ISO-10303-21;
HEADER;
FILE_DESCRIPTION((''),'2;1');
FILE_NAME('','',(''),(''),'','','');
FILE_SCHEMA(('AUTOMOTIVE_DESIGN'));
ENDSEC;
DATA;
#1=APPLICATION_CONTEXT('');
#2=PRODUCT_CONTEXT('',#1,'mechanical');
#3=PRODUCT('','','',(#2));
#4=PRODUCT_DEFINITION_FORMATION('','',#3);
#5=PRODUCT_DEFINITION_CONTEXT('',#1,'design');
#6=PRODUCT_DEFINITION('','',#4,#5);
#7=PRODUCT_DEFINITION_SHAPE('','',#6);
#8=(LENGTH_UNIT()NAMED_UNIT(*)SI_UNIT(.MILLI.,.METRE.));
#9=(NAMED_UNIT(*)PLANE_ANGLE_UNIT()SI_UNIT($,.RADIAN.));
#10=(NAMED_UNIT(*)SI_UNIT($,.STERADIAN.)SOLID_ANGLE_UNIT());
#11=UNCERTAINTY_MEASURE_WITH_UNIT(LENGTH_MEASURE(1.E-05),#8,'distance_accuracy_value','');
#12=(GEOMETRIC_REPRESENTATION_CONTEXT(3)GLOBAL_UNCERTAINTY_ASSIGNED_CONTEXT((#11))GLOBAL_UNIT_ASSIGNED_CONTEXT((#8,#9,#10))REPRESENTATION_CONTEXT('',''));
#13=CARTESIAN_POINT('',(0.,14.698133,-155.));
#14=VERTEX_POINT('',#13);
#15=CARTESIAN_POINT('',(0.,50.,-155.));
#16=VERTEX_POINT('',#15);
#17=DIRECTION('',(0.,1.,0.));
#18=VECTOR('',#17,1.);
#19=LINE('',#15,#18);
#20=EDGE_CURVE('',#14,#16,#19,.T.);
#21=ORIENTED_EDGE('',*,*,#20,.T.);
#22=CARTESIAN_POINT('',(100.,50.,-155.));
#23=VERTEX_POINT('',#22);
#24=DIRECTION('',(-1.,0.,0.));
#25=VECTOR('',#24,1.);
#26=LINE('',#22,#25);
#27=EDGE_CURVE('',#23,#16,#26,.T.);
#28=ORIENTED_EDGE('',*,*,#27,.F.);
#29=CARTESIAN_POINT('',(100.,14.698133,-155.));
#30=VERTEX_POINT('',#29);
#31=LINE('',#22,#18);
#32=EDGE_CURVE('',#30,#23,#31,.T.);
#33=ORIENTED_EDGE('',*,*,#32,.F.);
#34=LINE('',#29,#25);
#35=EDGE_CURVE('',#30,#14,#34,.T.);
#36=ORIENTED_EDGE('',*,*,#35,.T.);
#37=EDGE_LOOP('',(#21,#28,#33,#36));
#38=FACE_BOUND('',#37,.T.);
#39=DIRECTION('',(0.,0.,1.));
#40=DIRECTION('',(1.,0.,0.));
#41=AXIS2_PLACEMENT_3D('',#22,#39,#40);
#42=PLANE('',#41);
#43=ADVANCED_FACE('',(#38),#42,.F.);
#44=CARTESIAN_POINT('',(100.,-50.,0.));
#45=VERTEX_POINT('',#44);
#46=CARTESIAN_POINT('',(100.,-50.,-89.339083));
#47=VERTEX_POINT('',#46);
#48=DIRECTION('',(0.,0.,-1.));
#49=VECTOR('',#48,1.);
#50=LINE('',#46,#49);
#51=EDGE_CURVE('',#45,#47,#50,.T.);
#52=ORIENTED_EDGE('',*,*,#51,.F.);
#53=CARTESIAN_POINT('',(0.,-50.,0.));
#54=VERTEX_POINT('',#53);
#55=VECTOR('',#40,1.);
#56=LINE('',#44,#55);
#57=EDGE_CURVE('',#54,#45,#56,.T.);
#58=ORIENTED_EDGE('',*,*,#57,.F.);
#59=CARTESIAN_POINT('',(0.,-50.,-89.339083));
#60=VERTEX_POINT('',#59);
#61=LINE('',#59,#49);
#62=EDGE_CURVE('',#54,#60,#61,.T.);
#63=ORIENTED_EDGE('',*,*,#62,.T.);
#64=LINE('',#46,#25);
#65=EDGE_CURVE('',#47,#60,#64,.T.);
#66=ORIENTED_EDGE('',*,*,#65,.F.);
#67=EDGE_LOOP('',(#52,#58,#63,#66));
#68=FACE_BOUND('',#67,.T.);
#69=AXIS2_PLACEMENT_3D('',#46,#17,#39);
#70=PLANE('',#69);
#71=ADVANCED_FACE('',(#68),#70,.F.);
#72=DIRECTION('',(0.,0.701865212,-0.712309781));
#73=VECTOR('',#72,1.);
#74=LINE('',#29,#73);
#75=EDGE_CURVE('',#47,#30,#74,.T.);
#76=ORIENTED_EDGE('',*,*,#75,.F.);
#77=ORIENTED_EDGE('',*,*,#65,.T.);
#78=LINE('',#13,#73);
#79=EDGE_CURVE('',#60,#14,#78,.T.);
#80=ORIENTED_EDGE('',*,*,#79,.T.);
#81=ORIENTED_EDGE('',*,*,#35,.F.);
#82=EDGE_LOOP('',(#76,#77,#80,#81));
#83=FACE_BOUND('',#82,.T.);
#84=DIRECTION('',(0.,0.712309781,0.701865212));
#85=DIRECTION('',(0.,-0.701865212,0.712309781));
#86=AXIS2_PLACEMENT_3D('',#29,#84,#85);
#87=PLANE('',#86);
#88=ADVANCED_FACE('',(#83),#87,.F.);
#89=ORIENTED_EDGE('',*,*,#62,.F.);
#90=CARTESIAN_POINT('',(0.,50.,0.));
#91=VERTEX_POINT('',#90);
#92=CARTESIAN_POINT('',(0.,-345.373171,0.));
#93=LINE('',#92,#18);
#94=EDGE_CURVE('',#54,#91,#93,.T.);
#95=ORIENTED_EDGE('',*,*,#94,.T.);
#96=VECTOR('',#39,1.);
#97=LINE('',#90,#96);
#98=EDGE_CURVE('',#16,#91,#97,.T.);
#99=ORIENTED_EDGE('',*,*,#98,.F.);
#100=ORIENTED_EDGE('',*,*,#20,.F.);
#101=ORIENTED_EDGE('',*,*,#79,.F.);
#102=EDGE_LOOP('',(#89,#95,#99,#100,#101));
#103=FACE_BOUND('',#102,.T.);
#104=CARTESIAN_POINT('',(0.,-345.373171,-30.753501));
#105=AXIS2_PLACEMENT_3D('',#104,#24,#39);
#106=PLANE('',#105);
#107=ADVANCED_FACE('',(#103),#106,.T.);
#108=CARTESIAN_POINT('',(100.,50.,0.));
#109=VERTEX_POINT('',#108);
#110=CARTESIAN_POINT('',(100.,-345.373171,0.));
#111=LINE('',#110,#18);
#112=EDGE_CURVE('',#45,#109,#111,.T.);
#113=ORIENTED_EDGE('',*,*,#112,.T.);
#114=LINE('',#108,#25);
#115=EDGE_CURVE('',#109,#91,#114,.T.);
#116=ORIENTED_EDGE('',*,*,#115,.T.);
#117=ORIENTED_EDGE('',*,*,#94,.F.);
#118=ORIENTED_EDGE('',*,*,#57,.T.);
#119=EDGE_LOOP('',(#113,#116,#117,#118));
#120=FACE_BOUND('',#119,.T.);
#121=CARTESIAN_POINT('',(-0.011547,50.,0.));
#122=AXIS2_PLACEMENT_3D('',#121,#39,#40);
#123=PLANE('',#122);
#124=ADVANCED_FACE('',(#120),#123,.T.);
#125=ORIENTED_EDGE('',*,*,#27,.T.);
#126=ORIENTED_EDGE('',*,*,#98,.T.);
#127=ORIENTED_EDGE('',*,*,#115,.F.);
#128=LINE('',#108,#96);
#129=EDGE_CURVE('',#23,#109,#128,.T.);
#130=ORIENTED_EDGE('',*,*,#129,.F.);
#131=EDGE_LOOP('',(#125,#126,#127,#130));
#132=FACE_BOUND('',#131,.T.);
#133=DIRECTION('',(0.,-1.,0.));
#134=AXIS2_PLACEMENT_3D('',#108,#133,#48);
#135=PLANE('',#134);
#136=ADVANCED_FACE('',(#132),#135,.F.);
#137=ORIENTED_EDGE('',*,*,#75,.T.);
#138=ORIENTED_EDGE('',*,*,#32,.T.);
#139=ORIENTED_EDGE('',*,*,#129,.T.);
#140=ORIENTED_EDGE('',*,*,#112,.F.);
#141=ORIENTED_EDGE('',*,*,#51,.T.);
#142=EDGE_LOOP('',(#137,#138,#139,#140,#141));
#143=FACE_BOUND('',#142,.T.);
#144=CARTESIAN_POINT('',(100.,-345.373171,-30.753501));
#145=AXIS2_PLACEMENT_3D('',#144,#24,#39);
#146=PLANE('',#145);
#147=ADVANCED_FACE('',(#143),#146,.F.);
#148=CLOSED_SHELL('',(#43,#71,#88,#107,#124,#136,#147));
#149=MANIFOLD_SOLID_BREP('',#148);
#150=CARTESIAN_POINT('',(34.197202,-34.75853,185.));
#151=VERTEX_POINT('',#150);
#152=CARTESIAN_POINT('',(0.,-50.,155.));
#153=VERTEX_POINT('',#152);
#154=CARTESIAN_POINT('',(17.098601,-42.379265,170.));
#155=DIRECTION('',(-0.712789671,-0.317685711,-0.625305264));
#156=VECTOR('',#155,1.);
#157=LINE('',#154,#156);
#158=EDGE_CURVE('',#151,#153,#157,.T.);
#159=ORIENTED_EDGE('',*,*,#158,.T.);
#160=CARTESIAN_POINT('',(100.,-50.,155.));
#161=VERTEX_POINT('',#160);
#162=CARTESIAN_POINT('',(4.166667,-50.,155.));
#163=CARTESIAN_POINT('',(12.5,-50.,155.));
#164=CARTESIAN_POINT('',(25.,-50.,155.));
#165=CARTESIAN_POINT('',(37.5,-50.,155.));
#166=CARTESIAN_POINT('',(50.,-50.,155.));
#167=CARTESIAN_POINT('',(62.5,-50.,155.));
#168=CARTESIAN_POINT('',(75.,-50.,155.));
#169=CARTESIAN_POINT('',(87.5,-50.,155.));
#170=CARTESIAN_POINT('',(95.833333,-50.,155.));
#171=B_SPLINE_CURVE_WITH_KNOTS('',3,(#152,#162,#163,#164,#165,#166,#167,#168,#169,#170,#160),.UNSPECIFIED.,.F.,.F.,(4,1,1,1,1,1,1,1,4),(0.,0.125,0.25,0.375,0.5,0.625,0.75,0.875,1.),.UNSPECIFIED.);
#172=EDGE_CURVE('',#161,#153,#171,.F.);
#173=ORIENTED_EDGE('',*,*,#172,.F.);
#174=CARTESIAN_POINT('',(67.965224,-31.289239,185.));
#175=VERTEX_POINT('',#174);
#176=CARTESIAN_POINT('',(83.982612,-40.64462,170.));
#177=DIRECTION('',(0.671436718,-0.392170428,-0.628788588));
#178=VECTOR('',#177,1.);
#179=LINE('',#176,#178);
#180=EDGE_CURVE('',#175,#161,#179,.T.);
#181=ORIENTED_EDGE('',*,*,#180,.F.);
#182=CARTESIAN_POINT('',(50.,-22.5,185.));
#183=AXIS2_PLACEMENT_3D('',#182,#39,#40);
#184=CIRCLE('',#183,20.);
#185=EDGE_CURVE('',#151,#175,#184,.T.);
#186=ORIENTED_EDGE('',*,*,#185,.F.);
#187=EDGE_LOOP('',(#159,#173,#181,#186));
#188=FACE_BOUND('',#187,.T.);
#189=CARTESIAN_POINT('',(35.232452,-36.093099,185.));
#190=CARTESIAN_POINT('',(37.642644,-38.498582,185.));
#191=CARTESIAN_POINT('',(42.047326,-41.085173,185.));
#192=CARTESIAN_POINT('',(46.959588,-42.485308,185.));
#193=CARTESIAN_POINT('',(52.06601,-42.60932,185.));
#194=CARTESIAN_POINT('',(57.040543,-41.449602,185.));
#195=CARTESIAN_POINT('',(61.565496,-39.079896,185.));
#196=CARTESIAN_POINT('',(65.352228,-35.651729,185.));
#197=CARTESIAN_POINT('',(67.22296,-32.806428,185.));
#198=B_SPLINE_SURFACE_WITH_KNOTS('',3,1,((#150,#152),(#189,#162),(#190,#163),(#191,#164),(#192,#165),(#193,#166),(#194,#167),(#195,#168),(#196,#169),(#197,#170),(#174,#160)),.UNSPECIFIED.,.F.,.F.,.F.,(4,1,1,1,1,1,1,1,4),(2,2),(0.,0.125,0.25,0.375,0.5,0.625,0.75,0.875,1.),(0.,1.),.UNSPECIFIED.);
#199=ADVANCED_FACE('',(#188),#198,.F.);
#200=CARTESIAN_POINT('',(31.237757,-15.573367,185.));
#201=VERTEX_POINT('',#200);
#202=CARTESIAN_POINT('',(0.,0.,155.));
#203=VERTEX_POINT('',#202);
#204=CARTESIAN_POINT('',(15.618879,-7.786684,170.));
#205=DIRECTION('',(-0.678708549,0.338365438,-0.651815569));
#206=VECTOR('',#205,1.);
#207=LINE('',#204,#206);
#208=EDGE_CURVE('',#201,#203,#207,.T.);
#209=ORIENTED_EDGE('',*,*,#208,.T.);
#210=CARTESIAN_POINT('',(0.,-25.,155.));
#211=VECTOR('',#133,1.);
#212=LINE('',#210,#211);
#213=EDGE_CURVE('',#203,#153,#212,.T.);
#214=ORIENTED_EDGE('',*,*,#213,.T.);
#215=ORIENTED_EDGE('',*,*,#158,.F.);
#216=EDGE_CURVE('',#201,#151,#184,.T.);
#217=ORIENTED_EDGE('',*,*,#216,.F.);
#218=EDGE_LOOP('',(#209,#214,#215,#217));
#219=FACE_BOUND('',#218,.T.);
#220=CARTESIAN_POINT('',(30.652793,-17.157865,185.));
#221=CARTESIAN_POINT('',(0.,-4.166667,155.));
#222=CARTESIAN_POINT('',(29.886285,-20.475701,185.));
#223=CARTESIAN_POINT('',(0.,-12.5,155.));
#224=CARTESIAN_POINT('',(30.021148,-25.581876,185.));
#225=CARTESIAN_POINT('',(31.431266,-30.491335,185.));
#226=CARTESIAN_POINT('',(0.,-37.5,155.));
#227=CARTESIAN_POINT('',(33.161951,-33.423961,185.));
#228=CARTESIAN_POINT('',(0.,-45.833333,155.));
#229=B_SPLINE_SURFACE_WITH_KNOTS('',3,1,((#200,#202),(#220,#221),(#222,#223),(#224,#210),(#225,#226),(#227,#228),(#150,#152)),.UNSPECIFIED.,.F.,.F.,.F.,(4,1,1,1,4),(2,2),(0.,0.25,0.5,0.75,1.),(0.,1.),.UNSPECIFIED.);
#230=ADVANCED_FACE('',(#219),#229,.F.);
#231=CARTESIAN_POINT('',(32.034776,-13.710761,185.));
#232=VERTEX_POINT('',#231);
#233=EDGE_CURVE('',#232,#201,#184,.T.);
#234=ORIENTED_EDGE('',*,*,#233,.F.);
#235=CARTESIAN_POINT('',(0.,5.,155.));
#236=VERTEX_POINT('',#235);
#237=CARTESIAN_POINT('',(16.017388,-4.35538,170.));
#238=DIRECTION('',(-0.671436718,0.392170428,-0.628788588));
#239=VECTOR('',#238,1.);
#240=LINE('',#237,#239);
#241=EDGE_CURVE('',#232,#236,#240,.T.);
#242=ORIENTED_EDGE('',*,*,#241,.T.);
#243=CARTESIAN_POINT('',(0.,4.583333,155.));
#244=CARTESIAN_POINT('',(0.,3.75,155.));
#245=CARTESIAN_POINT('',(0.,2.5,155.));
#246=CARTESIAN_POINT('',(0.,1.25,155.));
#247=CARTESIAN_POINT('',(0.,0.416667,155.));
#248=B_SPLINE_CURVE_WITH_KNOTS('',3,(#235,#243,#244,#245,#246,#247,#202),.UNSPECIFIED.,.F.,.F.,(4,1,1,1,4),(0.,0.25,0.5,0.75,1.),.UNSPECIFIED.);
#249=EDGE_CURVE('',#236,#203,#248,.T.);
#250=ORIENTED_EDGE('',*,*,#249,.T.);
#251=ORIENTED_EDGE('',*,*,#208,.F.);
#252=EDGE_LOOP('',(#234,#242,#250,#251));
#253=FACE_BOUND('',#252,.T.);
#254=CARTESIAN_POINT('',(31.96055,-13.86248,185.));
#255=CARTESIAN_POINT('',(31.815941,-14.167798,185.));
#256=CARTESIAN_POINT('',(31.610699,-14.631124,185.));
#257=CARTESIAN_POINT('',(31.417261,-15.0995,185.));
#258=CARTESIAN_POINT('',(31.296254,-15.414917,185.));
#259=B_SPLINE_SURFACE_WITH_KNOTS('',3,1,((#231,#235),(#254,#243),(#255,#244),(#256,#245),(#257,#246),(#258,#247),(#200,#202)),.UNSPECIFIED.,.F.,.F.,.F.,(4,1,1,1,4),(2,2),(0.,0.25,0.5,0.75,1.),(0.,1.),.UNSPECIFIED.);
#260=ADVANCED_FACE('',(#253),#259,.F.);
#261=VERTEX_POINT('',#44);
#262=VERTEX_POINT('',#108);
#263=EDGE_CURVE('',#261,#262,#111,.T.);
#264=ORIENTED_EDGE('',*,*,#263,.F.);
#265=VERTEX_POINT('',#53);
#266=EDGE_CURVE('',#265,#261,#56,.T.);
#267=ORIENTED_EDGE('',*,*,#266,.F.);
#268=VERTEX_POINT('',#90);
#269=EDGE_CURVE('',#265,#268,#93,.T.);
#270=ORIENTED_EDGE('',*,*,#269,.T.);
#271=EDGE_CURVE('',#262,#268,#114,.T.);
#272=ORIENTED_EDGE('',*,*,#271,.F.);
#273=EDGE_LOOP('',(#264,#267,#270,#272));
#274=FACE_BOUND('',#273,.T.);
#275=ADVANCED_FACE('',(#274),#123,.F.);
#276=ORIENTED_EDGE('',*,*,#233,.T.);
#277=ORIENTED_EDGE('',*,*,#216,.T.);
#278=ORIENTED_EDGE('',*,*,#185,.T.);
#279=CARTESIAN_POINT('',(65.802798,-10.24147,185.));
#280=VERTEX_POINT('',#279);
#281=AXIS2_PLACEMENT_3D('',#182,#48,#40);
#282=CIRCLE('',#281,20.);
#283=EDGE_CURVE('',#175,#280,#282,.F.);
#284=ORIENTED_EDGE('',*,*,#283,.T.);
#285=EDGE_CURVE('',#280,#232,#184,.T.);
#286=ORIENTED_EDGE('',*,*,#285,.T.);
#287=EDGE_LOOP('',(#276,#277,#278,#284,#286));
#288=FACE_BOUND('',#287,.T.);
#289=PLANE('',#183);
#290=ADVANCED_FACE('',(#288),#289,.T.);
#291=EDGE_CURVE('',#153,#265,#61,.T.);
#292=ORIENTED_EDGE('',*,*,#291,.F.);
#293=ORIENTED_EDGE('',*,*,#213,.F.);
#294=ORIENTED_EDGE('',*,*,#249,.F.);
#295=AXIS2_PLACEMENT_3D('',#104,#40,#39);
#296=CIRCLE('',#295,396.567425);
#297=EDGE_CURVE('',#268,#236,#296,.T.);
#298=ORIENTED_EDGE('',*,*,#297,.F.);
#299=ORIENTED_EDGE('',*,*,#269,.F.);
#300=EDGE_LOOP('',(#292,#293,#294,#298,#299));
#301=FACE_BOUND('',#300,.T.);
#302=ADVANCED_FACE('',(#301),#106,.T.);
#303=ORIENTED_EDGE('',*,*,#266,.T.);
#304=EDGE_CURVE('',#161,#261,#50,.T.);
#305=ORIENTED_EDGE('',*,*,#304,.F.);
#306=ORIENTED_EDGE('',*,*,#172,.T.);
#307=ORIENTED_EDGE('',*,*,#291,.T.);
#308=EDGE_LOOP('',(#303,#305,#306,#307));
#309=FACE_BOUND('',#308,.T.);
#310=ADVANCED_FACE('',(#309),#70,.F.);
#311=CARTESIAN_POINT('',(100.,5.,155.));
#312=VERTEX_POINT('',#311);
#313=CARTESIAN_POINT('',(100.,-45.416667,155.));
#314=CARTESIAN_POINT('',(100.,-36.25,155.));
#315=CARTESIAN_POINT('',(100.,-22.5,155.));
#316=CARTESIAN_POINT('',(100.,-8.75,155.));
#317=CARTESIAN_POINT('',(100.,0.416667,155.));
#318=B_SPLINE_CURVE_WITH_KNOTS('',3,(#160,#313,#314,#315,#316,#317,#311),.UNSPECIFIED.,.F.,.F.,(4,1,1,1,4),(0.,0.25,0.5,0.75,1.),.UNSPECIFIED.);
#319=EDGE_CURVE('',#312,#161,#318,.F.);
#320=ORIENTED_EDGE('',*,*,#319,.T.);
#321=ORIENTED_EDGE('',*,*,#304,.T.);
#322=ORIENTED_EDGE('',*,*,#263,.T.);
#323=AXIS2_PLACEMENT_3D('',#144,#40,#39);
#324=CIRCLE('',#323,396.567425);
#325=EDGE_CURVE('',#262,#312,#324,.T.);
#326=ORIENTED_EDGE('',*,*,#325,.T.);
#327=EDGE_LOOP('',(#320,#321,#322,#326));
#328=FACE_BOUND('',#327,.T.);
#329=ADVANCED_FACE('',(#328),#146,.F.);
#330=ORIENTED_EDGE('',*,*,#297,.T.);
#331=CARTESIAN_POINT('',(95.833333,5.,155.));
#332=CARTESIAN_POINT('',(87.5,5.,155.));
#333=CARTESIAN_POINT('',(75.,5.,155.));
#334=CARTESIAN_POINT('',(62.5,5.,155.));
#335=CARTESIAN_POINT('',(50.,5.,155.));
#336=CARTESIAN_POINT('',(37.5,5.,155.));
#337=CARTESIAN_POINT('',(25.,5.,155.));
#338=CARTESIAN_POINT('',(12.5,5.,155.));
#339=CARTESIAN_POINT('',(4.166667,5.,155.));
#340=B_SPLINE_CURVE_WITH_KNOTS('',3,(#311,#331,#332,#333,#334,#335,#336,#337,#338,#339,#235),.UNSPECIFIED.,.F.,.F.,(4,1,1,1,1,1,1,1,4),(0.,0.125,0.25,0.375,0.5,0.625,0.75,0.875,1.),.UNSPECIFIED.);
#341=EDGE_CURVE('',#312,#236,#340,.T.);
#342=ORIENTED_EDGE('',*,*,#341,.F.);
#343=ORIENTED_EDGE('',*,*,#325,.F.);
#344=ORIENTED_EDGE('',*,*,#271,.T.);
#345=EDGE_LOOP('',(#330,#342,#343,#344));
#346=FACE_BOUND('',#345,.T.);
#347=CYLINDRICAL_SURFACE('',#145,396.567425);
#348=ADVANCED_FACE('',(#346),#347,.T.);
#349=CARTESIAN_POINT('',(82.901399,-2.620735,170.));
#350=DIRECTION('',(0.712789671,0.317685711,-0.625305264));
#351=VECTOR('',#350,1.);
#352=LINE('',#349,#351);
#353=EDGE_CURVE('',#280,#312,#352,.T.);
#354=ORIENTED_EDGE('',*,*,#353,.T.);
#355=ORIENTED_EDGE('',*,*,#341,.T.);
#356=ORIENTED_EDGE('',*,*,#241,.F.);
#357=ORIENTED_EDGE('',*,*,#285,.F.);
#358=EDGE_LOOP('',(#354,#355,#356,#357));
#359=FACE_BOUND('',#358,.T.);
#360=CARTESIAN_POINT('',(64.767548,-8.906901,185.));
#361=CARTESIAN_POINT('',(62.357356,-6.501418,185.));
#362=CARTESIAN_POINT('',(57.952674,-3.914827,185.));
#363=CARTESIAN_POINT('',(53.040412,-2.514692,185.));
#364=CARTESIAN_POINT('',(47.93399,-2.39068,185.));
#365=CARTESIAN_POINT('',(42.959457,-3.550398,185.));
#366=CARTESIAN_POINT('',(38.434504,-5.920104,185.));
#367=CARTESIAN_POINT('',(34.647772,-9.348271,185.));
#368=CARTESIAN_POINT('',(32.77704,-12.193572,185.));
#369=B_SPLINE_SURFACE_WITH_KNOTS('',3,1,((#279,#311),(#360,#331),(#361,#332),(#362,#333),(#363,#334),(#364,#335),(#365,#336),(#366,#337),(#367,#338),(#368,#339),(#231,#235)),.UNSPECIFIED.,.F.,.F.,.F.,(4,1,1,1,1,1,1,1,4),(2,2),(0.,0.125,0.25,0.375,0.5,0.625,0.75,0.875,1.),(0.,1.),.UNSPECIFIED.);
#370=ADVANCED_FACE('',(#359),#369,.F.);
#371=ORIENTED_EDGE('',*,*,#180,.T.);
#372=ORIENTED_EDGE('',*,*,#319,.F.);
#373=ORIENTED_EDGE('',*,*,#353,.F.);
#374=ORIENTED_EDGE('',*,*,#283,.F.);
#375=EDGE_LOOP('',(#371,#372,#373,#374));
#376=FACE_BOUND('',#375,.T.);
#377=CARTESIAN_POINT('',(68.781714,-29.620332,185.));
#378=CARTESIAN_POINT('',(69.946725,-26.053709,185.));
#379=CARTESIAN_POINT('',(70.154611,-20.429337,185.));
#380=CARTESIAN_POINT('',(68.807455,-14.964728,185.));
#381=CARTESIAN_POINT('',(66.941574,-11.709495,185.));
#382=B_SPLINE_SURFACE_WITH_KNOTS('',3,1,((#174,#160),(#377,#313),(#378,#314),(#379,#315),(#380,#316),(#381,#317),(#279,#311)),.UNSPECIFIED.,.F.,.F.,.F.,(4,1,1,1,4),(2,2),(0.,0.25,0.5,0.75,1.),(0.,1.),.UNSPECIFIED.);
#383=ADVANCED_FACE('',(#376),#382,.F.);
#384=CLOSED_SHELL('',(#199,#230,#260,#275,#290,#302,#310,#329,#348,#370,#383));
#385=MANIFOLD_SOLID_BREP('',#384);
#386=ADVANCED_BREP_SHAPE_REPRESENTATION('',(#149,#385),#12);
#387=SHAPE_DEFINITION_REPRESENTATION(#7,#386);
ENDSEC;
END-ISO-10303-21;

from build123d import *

# Parameters (mm, degrees)
BOSS_EXTRUDE1_DEPTH    = 100
SPLIT1_SURFACE_1_BACK  = 369.239
SPLIT1_SURFACE_1_DEPTH = 738.478
SPLIT1_SURFACE_2_BACK  = 369.239
SPLIT1_SURFACE_2_DEPTH = 738.478


with BuildPart() as part:
    # Sketch3 → Boss-Extrude1 (new body)
    with BuildSketch(Plane(origin=(0, 0, 0), x_dir=(0, 0, -1), z_dir=(1, 0, 0))):
        with BuildLine():
            Line((-155, -50), (-155, 5))
            ThreePointArc((-155, 5), (-79.813539645, 35.468858776), (0, 50))
            Line((0, 50), (155, 50))
            Line((155, 50), (155, 14.698133415))
            Line((155, 14.698133415), (89.339083264, -50))
            Line((89.339083264, -50), (-155, -50))
        make_face()
    extrude(amount=BOSS_EXTRUDE1_DEPTH)

    # Boundary1: read off the stored shape, not the designer's step
    # Boundary1: loft between two sections, ruled curve by curve
    boundary1_from = [
        Edge.make_bspline([(31.237757156, -15.573367091, 185), (30.652793203, -17.157865056, 185), (29.886284502, -20.475700825, 185), (30.021147921, -25.581876421, 185), (31.431265533, -30.491335219, 185), (33.16195132, -33.423961428, 185), (34.197201541, -34.758530126, 185)], [0, 0, 0, 0, 0.25, 0.5, 0.75, 1, 1, 1, 1], 3),
        Edge.make_bspline([(34.197201541, -34.758530126, 185), (35.232451761, -36.093098823, 185), (37.642644081, -38.498582399, 185), (42.047325798, -41.085172558, 185), (46.959588117, -42.485308309, 185), (52.06601026, -42.609319976, 185), (57.040543341, -41.449601635, 185), (61.565496183, -39.079896381, 185), (65.352228079, -35.651729054, 185), (67.222960323, -32.806427817, 185), (67.965224015, -31.289239221, 185)], [0, 0, 0, 0, 0.125, 0.25, 0.375, 0.5, 0.625, 0.75, 0.875, 1, 1, 1, 1], 3),
        Edge.make_bspline([(67.965224015, -31.289239221, 185), (68.781714077, -29.620331765, 185), (69.946725169, -26.053708986, 185), (70.154611053, -20.429336582, 185), (68.807454947, -14.964727548, 185), (66.941573702, -11.709495441, 185), (65.802798459, -10.241469874, 185)], [0, 0, 0, 0, 0.25, 0.5, 0.75, 1, 1, 1, 1], 3),
        Edge.make_bspline([(65.802798459, -10.241469874, 185), (64.767548239, -8.906901177, 185), (62.357355919, -6.501417601, 185), (57.952674202, -3.914827442, 185), (53.040411883, -2.514691691, 185), (47.93398974, -2.390680024, 185), (42.959456659, -3.550398365, 185), (38.434503817, -5.920103619, 185), (34.647771921, -9.348270946, 185), (32.777039677, -12.193572183, 185), (32.034775985, -13.710760779, 185)], [0, 0, 0, 0, 0.125, 0.25, 0.375, 0.5, 0.625, 0.75, 0.875, 1, 1, 1, 1], 3),
        Edge.make_bspline([(32.034775985, -13.710760779, 185), (31.960549615, -13.862479639, 185), (31.815940975, -14.167797893, 185), (31.610699362, -14.631123595, 185), (31.417260882, -15.099499919, 185), (31.296253551, -15.414917295, 185), (31.237757156, -15.573367091, 185)], [0, 0, 0, 0, 0.25, 0.5, 0.75, 1, 1, 1, 1], 3),
    ]
    boundary1_to = [
        Edge.make_bspline([(0, 0, 155), (0, -4.166666667, 155), (0, -12.5, 155), (0, -25, 155), (0, -37.5, 155), (0, -45.833333333, 155), (0, -50, 155)], [0, 0, 0, 0, 0.25, 0.5, 0.75, 1, 1, 1, 1], 3),
        Edge.make_bspline([(0, -50, 155), (4.166666667, -50, 155), (12.5, -50, 155), (25, -50, 155), (37.5, -50, 155), (50, -50, 155), (62.5, -50, 155), (75, -50, 155), (87.5, -50, 155), (95.833333333, -50, 155), (100, -50, 155)], [0, 0, 0, 0, 0.125, 0.25, 0.375, 0.5, 0.625, 0.75, 0.875, 1, 1, 1, 1], 3),
        Edge.make_bspline([(100, -50, 155), (100, -45.416666667, 155), (100, -36.25, 155), (100, -22.5, 155), (100, -8.75, 155), (100, 0.416666667, 155), (100, 5, 155)], [0, 0, 0, 0, 0.25, 0.5, 0.75, 1, 1, 1, 1], 3),
        Edge.make_bspline([(100, 5, 155), (95.833333333, 5, 155), (87.5, 5, 155), (75, 5, 155), (62.5, 5, 155), (50, 5, 155), (37.5, 5, 155), (25, 5, 155), (12.5, 5, 155), (4.166666667, 5, 155), (0, 5, 155)], [0, 0, 0, 0, 0.125, 0.25, 0.375, 0.5, 0.625, 0.75, 0.875, 1, 1, 1, 1], 3),
        Edge.make_bspline([(0, 5, 155), (0, 4.583333333, 155), (0, 3.75, 155), (0, 2.5, 155), (0, 1.25, 155), (0, 0.416666667, 155), (0, 0, 155)], [0, 0, 0, 0, 0.25, 0.5, 0.75, 1, 1, 1, 1], 3),
    ]
    boundary1 = Solid(Shell([*[Face.make_surface_from_curves(boundary1_from[k], boundary1_to[k]) for k in range(5)], Face(Wire(boundary1_from)), Face(Wire(boundary1_to))]))
    add(boundary1)


with BuildPart() as body_2:
    # Split1: the piece behind the surface
    add(part.part)
    # Split1 surface: a surface, the sketch's curves swept straight by 738.478 mm
    with BuildLine(Plane(origin=(100, 0, 0), x_dir=(0, 0, -1), z_dir=(1, 0, 0)).offset(-SPLIT1_SURFACE_1_BACK), mode=Mode.PRIVATE) as split1_surface_1_path:
        Line((0, 50), (0, -50))
    split1_surface_1 = Shell.extrude(split1_surface_1_path.wire(), (1 * SPLIT1_SURFACE_1_DEPTH, 0 * SPLIT1_SURFACE_1_DEPTH, 0 * SPLIT1_SURFACE_1_DEPTH))
    split(bisect_by=split1_surface_1, keep=Keep.BOTTOM)


with BuildPart() as part_1:
    add(part.part)

    # Split1: split by a surface, the side it looks to stays
    # Split1 surface: a surface, the sketch's curves swept straight by 738.478 mm
    with BuildLine(Plane(origin=(100, 0, 0), x_dir=(0, 0, -1), z_dir=(1, 0, 0)).offset(-SPLIT1_SURFACE_2_BACK), mode=Mode.PRIVATE) as split1_surface_2_path:
        Line((0, 50), (0, -50))
    split1_surface_2 = Shell.extrude(split1_surface_2_path.wire(), (1 * SPLIT1_SURFACE_2_DEPTH, 0 * SPLIT1_SURFACE_2_DEPTH, 0 * SPLIT1_SURFACE_2_DEPTH))
    split(bisect_by=split1_surface_2, keep=Keep.TOP)


solid = Compound([body_2.part, part_1.part])
